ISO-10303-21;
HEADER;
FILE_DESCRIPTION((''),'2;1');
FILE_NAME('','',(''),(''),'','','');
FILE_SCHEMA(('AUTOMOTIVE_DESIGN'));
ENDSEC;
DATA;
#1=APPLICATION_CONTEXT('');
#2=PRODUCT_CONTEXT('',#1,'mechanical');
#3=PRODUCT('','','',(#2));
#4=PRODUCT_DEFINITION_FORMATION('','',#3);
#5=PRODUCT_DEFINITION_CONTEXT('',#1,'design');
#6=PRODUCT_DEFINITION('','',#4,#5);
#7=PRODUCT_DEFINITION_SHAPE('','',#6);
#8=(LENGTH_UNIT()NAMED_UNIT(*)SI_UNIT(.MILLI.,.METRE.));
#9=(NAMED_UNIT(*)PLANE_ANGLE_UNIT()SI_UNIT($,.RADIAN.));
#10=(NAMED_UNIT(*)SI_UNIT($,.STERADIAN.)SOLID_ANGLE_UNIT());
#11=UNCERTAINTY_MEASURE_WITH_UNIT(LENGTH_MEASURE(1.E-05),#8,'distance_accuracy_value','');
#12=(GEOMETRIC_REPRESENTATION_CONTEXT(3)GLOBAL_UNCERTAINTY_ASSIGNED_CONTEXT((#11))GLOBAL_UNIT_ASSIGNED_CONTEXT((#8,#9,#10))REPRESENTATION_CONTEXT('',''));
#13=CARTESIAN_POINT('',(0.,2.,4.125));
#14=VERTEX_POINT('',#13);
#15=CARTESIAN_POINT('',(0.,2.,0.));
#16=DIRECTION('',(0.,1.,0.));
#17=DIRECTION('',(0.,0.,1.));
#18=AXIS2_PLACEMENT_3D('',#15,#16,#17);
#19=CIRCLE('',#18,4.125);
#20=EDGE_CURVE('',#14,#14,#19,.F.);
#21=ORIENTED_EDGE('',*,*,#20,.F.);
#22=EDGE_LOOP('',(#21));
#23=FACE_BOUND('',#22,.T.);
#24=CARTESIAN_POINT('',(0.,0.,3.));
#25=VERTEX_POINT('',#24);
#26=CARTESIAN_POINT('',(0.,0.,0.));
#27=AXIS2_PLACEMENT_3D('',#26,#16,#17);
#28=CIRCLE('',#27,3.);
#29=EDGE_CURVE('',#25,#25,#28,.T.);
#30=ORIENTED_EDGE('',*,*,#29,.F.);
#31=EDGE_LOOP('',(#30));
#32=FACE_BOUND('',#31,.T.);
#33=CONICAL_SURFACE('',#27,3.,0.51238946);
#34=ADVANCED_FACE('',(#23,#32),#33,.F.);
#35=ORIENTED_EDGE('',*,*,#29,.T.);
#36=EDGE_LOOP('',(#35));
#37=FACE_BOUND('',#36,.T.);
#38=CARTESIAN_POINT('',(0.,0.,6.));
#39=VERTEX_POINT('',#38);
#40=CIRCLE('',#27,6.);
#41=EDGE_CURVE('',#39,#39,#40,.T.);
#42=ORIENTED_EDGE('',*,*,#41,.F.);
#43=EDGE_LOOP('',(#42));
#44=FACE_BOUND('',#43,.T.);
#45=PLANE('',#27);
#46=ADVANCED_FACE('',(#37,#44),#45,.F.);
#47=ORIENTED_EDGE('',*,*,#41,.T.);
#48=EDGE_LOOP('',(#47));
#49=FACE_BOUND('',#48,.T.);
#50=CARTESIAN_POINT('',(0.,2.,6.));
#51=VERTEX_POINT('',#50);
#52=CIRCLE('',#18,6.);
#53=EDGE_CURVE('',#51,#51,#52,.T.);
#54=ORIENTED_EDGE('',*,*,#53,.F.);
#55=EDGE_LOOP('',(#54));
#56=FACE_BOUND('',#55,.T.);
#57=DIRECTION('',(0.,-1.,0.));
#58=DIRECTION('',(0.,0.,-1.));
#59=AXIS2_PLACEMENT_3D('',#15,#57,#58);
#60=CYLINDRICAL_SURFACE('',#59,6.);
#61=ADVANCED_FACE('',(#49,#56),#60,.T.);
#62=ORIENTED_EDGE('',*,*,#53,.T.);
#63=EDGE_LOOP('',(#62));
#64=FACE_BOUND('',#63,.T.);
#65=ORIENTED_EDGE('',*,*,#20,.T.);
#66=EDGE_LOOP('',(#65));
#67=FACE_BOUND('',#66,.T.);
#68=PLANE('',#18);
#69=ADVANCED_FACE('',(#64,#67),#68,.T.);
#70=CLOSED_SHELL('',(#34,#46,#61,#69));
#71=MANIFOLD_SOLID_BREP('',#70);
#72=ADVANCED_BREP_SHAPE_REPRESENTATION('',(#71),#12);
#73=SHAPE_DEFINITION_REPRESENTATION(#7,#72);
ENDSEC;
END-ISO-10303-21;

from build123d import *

# Parameters (mm, degrees)
SKETCH1_R           = 6
SKETCH1_R_2         = 3
BOSS_EXTRUDE1_DEPTH = 2
CHAMFER1_SIZE       = 2
CHAMFER1_SIZE_2     = 1.125


with BuildPart() as part:
    # Sketch1 → Boss-Extrude1 (new body)
    with BuildSketch(Plane(origin=(0, 0, 0), x_dir=(1, 0, 0), z_dir=(0, 1, 0))):
        with Locations(Location((0, 0, 0), (0, 0, 270))):
            Circle(SKETCH1_R)
        with Locations(Location((0, 0, 0), (0, 0, 270))):
            Circle(SKETCH1_R_2, mode=Mode.SUBTRACT)
    extrude(amount=BOSS_EXTRUDE1_DEPTH)

    # Chamfer1
    # the kernel refuses this chamfer: 2, 1.125 mm, written as the material it takes off along each edge
    with BuildSketch(Plane(origin=(0, 2, 0), x_dir=(0, 0, 1), z_dir=(-1, 0, 0))) as chamfer1_piece_1:
        Polygon((3, -CHAMFER1_SIZE), (3 + CHAMFER1_SIZE_2, 0), (3, 0), align=None)
    revolve(axis=Axis((0, 2, 0), (0, 1, 0)), mode=Mode.SUBTRACT)


solid = part.part
